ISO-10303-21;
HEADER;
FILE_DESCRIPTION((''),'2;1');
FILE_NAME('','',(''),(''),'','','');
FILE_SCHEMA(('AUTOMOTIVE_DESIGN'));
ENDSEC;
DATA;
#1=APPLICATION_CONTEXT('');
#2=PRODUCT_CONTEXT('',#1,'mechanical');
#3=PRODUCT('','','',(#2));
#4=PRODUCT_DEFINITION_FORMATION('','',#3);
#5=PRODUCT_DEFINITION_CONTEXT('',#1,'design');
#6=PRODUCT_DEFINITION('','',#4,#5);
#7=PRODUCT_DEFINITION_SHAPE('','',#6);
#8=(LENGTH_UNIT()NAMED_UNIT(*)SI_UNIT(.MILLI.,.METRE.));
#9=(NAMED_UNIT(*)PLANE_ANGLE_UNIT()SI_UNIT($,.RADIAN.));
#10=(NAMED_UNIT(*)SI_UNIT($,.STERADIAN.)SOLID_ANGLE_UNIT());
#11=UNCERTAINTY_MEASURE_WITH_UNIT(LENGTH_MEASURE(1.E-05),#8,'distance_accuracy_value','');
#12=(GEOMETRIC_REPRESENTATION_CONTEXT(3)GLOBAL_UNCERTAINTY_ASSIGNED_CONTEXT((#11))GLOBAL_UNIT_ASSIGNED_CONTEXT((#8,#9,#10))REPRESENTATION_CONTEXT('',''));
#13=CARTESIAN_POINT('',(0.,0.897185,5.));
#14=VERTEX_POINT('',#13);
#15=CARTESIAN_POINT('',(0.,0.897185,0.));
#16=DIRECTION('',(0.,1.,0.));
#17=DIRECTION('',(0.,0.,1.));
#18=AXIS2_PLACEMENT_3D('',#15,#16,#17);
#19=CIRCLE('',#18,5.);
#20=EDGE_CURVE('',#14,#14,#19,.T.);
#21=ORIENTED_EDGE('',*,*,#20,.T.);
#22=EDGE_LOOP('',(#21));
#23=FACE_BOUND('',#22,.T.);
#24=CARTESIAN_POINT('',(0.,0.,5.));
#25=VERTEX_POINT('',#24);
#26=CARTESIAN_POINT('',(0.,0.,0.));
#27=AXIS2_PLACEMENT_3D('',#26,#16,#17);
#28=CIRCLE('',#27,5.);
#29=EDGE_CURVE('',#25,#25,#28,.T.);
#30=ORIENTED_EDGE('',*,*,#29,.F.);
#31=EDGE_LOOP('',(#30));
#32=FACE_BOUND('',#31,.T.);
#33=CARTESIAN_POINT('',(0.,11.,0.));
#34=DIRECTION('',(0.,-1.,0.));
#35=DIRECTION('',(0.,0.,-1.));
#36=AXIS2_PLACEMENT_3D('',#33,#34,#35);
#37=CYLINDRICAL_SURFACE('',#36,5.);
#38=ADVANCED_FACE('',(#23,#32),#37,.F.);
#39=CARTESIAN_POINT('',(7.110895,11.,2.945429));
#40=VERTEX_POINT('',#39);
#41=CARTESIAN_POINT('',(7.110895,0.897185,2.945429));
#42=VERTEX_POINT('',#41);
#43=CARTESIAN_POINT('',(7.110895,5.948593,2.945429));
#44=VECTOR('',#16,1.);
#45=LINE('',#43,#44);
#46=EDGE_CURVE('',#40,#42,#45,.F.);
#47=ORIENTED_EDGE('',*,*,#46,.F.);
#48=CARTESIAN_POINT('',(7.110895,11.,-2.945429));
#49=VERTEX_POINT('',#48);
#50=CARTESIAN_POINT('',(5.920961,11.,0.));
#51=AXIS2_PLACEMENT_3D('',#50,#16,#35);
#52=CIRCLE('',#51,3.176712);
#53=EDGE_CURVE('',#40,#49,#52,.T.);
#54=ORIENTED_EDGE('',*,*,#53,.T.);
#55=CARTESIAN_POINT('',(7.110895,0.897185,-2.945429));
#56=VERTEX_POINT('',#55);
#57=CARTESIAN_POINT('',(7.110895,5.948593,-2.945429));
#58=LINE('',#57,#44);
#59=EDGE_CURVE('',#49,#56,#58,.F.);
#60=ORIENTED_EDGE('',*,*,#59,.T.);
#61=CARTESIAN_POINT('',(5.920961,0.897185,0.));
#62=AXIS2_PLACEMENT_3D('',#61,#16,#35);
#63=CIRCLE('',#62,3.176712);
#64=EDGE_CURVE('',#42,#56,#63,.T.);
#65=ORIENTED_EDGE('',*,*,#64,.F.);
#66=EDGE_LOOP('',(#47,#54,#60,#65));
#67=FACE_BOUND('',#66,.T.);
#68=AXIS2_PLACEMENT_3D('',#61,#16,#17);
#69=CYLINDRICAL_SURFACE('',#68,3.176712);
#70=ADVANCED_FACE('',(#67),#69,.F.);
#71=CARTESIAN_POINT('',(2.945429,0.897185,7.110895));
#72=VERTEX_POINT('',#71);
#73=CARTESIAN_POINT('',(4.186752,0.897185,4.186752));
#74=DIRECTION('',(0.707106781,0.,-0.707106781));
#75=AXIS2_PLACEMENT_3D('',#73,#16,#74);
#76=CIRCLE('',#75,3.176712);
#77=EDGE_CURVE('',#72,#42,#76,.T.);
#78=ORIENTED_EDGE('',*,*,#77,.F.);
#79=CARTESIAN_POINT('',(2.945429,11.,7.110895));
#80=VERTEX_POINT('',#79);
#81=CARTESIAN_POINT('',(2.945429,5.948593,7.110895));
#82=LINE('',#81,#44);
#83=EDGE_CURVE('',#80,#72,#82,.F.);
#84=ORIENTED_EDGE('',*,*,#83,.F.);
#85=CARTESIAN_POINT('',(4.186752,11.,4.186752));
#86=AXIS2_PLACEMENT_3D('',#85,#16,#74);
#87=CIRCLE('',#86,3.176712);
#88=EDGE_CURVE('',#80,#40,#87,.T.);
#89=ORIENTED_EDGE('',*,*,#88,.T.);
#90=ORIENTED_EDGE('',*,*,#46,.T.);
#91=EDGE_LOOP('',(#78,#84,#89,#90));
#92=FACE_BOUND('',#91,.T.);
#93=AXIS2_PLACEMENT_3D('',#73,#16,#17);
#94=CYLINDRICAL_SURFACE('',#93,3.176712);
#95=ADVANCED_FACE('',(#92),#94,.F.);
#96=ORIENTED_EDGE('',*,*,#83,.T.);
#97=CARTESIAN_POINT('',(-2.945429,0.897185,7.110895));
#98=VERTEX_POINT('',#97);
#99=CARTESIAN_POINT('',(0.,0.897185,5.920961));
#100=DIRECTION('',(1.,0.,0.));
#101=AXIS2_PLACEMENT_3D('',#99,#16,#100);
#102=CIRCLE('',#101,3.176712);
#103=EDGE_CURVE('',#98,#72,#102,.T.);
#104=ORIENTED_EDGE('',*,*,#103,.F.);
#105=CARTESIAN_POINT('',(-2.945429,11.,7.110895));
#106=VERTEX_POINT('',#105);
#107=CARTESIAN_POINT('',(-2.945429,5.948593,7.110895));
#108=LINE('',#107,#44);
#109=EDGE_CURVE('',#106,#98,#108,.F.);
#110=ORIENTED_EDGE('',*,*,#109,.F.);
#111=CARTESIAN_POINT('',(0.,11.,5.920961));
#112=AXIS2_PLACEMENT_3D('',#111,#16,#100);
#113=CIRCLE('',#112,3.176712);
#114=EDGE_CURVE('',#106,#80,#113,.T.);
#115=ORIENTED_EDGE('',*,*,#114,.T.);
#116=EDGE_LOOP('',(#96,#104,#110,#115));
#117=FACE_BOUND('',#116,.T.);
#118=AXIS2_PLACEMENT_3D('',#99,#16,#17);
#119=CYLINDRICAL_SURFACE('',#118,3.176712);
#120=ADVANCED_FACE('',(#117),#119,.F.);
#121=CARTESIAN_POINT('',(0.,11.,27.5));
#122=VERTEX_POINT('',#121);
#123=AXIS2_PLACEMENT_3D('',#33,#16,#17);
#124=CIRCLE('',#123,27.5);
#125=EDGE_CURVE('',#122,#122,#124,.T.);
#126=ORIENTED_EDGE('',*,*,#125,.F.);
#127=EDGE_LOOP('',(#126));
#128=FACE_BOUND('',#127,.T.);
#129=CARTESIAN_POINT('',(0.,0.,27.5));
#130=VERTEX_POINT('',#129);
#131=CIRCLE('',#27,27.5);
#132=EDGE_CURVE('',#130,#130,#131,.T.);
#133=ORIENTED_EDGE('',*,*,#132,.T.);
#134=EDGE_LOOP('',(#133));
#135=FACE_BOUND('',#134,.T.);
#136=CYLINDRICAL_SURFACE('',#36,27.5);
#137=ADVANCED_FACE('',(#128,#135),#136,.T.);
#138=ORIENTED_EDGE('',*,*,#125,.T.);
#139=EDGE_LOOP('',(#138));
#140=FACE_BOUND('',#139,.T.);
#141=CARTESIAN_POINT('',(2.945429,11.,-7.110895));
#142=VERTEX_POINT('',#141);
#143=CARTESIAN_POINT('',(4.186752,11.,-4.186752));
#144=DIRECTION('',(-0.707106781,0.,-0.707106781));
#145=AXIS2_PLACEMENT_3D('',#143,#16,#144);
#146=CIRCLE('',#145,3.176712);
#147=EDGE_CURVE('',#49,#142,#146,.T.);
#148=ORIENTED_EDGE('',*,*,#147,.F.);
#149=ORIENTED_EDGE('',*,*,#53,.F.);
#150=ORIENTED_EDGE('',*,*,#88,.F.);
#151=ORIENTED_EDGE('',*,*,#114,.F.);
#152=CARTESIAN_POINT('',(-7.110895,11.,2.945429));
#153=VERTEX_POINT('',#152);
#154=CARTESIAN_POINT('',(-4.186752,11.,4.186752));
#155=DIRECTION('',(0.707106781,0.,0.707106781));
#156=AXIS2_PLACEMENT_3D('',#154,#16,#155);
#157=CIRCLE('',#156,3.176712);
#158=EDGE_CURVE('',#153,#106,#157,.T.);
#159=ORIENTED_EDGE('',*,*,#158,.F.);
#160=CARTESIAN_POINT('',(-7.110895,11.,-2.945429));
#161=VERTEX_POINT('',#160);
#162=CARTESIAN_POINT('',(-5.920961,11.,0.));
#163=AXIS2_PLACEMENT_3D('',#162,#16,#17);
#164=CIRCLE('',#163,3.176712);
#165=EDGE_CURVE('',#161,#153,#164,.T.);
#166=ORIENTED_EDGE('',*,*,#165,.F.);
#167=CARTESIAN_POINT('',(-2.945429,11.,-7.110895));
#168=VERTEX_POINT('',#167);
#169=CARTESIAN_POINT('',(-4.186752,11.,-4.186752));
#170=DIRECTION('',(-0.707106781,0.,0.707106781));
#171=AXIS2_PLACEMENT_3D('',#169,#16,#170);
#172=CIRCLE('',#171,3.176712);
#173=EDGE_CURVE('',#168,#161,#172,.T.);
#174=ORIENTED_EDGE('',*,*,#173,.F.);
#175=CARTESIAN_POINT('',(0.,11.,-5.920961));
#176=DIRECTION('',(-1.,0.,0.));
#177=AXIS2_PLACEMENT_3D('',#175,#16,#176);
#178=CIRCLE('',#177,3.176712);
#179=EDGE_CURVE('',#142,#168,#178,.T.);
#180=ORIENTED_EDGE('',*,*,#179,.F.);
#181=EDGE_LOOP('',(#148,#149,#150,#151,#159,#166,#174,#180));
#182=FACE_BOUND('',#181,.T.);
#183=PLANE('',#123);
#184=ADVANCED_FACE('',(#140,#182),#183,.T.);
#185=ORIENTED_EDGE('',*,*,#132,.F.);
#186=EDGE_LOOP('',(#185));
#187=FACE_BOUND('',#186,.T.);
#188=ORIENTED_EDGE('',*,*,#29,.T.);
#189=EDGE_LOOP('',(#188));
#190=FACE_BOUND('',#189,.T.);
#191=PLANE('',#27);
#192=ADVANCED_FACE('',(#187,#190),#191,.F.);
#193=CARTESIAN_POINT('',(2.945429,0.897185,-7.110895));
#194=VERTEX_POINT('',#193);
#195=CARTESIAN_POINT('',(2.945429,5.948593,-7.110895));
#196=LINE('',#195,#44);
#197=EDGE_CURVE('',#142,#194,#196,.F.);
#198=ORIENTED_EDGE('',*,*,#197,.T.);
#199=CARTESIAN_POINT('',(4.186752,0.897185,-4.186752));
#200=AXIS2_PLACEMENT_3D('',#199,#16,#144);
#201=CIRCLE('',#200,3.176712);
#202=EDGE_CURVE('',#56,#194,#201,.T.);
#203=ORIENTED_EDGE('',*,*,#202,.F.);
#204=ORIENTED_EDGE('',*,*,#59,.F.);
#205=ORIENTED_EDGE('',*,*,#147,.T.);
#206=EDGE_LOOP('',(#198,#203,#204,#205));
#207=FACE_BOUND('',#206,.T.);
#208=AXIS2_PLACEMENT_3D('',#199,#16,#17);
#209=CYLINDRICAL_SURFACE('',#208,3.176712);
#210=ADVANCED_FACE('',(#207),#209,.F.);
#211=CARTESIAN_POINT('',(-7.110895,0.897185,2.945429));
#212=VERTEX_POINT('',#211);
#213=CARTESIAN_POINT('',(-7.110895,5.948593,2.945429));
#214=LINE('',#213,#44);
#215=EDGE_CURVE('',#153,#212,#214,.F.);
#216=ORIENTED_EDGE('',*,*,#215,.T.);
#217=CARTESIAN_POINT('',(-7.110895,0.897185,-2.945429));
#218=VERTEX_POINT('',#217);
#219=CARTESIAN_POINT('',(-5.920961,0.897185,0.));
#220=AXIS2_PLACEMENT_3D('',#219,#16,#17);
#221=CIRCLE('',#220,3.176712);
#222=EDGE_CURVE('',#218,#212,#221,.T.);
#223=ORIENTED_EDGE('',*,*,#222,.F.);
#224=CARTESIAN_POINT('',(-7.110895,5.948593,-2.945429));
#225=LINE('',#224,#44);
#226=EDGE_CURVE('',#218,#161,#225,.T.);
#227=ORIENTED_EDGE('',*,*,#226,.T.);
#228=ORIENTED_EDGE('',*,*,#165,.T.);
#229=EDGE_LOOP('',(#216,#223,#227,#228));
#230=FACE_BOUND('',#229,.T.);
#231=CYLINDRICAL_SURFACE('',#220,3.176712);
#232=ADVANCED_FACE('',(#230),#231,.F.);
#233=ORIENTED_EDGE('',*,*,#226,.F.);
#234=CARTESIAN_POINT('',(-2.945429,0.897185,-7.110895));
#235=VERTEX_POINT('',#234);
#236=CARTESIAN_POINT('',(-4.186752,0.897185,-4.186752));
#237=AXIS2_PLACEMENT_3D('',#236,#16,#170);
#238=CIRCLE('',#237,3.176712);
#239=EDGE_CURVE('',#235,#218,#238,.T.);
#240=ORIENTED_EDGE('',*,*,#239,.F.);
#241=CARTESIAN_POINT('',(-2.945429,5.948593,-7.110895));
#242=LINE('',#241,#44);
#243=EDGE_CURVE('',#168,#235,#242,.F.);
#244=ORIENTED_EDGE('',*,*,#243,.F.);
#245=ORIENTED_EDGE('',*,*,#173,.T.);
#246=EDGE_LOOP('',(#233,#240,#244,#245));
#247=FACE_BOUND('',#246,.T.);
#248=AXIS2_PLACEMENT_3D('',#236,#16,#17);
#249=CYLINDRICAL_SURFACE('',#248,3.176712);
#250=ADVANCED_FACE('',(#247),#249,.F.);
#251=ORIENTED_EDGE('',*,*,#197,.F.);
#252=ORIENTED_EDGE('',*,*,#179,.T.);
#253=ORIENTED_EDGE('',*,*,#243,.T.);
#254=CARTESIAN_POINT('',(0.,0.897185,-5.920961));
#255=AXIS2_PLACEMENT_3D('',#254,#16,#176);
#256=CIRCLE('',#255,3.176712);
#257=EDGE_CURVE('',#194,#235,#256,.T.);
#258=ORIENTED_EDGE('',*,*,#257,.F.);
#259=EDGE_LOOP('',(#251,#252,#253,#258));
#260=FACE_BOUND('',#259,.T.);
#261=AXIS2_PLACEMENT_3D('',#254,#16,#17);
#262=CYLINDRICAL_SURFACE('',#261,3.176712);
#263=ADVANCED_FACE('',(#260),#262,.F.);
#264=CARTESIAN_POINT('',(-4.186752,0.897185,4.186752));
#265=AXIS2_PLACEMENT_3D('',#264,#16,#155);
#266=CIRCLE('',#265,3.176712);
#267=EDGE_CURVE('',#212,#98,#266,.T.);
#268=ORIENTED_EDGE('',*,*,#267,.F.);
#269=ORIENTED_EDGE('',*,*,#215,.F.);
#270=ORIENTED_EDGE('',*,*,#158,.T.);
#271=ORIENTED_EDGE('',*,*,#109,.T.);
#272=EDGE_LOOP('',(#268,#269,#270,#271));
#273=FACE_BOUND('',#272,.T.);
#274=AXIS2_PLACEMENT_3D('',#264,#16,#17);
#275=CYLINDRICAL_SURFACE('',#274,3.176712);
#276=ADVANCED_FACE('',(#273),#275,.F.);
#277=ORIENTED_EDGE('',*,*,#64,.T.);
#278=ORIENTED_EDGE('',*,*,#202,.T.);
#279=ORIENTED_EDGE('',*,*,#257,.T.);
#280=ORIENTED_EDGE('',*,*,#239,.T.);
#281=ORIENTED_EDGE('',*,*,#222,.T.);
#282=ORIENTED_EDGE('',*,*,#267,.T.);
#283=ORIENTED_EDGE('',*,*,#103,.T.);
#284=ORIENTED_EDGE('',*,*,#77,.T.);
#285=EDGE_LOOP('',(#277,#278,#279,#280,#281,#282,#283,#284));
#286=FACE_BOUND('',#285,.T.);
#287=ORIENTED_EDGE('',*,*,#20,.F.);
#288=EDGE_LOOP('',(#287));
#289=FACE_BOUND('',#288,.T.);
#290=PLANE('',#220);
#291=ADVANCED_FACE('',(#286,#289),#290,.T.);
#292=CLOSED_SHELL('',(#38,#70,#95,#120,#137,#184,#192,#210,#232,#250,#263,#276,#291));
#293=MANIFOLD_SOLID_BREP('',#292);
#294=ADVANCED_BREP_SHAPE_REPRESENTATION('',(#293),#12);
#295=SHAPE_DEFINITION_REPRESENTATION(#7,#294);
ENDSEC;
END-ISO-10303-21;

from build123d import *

# Parameters (mm, degrees)
SKETCH1_R           = 27.5
BOSS_EXTRUDE1_DEPTH = 11
SKETCH2_R           = 5
CUT_EXTRUDE1_DEPTH  = 41.416580756
SKETCH3_R           = 3.176711529
CUT_EXTRUDE2_DEPTH  = 10.102814625
CIRPATTERN1_COUNT   = 8


with BuildPart() as part:
    # Sketch1 → Boss-Extrude1 (new body)
    with BuildSketch(Plane(origin=(0, 0, 0), x_dir=(1, 0, 0), z_dir=(0, 1, 0))):
        Circle(SKETCH1_R)
    extrude(amount=BOSS_EXTRUDE1_DEPTH)

    # Sketch2 → Cut-Extrude1 (cut, through all)
    with BuildSketch(Plane(origin=(0, 0, 0), x_dir=(1, 0, 0), z_dir=(0, 1, 0))):
        Circle(SKETCH2_R)
    extrude(amount=CUT_EXTRUDE1_DEPTH, mode=Mode.SUBTRACT)

    # Sketch3 → Cut-Extrude2 (cut)
    with BuildSketch(Plane(origin=(0, 11, 0), x_dir=(1, 0, 0), z_dir=(0, 1, 0))):
        with Locations((-5.920961164, 0)):
            Circle(SKETCH3_R)
    cut_extrude2 = extrude(amount=-CUT_EXTRUDE2_DEPTH, mode=Mode.SUBTRACT)

    # CirPattern1: Cut-Extrude2 ×8 about axis
    cirpattern1_axis = Axis((0, 0, 0), (0, 1, 0))
    for i in range(1, CIRPATTERN1_COUNT):
        add(cut_extrude2.rotate(cirpattern1_axis, i * 360 / CIRPATTERN1_COUNT), mode=Mode.SUBTRACT)


solid = part.part
